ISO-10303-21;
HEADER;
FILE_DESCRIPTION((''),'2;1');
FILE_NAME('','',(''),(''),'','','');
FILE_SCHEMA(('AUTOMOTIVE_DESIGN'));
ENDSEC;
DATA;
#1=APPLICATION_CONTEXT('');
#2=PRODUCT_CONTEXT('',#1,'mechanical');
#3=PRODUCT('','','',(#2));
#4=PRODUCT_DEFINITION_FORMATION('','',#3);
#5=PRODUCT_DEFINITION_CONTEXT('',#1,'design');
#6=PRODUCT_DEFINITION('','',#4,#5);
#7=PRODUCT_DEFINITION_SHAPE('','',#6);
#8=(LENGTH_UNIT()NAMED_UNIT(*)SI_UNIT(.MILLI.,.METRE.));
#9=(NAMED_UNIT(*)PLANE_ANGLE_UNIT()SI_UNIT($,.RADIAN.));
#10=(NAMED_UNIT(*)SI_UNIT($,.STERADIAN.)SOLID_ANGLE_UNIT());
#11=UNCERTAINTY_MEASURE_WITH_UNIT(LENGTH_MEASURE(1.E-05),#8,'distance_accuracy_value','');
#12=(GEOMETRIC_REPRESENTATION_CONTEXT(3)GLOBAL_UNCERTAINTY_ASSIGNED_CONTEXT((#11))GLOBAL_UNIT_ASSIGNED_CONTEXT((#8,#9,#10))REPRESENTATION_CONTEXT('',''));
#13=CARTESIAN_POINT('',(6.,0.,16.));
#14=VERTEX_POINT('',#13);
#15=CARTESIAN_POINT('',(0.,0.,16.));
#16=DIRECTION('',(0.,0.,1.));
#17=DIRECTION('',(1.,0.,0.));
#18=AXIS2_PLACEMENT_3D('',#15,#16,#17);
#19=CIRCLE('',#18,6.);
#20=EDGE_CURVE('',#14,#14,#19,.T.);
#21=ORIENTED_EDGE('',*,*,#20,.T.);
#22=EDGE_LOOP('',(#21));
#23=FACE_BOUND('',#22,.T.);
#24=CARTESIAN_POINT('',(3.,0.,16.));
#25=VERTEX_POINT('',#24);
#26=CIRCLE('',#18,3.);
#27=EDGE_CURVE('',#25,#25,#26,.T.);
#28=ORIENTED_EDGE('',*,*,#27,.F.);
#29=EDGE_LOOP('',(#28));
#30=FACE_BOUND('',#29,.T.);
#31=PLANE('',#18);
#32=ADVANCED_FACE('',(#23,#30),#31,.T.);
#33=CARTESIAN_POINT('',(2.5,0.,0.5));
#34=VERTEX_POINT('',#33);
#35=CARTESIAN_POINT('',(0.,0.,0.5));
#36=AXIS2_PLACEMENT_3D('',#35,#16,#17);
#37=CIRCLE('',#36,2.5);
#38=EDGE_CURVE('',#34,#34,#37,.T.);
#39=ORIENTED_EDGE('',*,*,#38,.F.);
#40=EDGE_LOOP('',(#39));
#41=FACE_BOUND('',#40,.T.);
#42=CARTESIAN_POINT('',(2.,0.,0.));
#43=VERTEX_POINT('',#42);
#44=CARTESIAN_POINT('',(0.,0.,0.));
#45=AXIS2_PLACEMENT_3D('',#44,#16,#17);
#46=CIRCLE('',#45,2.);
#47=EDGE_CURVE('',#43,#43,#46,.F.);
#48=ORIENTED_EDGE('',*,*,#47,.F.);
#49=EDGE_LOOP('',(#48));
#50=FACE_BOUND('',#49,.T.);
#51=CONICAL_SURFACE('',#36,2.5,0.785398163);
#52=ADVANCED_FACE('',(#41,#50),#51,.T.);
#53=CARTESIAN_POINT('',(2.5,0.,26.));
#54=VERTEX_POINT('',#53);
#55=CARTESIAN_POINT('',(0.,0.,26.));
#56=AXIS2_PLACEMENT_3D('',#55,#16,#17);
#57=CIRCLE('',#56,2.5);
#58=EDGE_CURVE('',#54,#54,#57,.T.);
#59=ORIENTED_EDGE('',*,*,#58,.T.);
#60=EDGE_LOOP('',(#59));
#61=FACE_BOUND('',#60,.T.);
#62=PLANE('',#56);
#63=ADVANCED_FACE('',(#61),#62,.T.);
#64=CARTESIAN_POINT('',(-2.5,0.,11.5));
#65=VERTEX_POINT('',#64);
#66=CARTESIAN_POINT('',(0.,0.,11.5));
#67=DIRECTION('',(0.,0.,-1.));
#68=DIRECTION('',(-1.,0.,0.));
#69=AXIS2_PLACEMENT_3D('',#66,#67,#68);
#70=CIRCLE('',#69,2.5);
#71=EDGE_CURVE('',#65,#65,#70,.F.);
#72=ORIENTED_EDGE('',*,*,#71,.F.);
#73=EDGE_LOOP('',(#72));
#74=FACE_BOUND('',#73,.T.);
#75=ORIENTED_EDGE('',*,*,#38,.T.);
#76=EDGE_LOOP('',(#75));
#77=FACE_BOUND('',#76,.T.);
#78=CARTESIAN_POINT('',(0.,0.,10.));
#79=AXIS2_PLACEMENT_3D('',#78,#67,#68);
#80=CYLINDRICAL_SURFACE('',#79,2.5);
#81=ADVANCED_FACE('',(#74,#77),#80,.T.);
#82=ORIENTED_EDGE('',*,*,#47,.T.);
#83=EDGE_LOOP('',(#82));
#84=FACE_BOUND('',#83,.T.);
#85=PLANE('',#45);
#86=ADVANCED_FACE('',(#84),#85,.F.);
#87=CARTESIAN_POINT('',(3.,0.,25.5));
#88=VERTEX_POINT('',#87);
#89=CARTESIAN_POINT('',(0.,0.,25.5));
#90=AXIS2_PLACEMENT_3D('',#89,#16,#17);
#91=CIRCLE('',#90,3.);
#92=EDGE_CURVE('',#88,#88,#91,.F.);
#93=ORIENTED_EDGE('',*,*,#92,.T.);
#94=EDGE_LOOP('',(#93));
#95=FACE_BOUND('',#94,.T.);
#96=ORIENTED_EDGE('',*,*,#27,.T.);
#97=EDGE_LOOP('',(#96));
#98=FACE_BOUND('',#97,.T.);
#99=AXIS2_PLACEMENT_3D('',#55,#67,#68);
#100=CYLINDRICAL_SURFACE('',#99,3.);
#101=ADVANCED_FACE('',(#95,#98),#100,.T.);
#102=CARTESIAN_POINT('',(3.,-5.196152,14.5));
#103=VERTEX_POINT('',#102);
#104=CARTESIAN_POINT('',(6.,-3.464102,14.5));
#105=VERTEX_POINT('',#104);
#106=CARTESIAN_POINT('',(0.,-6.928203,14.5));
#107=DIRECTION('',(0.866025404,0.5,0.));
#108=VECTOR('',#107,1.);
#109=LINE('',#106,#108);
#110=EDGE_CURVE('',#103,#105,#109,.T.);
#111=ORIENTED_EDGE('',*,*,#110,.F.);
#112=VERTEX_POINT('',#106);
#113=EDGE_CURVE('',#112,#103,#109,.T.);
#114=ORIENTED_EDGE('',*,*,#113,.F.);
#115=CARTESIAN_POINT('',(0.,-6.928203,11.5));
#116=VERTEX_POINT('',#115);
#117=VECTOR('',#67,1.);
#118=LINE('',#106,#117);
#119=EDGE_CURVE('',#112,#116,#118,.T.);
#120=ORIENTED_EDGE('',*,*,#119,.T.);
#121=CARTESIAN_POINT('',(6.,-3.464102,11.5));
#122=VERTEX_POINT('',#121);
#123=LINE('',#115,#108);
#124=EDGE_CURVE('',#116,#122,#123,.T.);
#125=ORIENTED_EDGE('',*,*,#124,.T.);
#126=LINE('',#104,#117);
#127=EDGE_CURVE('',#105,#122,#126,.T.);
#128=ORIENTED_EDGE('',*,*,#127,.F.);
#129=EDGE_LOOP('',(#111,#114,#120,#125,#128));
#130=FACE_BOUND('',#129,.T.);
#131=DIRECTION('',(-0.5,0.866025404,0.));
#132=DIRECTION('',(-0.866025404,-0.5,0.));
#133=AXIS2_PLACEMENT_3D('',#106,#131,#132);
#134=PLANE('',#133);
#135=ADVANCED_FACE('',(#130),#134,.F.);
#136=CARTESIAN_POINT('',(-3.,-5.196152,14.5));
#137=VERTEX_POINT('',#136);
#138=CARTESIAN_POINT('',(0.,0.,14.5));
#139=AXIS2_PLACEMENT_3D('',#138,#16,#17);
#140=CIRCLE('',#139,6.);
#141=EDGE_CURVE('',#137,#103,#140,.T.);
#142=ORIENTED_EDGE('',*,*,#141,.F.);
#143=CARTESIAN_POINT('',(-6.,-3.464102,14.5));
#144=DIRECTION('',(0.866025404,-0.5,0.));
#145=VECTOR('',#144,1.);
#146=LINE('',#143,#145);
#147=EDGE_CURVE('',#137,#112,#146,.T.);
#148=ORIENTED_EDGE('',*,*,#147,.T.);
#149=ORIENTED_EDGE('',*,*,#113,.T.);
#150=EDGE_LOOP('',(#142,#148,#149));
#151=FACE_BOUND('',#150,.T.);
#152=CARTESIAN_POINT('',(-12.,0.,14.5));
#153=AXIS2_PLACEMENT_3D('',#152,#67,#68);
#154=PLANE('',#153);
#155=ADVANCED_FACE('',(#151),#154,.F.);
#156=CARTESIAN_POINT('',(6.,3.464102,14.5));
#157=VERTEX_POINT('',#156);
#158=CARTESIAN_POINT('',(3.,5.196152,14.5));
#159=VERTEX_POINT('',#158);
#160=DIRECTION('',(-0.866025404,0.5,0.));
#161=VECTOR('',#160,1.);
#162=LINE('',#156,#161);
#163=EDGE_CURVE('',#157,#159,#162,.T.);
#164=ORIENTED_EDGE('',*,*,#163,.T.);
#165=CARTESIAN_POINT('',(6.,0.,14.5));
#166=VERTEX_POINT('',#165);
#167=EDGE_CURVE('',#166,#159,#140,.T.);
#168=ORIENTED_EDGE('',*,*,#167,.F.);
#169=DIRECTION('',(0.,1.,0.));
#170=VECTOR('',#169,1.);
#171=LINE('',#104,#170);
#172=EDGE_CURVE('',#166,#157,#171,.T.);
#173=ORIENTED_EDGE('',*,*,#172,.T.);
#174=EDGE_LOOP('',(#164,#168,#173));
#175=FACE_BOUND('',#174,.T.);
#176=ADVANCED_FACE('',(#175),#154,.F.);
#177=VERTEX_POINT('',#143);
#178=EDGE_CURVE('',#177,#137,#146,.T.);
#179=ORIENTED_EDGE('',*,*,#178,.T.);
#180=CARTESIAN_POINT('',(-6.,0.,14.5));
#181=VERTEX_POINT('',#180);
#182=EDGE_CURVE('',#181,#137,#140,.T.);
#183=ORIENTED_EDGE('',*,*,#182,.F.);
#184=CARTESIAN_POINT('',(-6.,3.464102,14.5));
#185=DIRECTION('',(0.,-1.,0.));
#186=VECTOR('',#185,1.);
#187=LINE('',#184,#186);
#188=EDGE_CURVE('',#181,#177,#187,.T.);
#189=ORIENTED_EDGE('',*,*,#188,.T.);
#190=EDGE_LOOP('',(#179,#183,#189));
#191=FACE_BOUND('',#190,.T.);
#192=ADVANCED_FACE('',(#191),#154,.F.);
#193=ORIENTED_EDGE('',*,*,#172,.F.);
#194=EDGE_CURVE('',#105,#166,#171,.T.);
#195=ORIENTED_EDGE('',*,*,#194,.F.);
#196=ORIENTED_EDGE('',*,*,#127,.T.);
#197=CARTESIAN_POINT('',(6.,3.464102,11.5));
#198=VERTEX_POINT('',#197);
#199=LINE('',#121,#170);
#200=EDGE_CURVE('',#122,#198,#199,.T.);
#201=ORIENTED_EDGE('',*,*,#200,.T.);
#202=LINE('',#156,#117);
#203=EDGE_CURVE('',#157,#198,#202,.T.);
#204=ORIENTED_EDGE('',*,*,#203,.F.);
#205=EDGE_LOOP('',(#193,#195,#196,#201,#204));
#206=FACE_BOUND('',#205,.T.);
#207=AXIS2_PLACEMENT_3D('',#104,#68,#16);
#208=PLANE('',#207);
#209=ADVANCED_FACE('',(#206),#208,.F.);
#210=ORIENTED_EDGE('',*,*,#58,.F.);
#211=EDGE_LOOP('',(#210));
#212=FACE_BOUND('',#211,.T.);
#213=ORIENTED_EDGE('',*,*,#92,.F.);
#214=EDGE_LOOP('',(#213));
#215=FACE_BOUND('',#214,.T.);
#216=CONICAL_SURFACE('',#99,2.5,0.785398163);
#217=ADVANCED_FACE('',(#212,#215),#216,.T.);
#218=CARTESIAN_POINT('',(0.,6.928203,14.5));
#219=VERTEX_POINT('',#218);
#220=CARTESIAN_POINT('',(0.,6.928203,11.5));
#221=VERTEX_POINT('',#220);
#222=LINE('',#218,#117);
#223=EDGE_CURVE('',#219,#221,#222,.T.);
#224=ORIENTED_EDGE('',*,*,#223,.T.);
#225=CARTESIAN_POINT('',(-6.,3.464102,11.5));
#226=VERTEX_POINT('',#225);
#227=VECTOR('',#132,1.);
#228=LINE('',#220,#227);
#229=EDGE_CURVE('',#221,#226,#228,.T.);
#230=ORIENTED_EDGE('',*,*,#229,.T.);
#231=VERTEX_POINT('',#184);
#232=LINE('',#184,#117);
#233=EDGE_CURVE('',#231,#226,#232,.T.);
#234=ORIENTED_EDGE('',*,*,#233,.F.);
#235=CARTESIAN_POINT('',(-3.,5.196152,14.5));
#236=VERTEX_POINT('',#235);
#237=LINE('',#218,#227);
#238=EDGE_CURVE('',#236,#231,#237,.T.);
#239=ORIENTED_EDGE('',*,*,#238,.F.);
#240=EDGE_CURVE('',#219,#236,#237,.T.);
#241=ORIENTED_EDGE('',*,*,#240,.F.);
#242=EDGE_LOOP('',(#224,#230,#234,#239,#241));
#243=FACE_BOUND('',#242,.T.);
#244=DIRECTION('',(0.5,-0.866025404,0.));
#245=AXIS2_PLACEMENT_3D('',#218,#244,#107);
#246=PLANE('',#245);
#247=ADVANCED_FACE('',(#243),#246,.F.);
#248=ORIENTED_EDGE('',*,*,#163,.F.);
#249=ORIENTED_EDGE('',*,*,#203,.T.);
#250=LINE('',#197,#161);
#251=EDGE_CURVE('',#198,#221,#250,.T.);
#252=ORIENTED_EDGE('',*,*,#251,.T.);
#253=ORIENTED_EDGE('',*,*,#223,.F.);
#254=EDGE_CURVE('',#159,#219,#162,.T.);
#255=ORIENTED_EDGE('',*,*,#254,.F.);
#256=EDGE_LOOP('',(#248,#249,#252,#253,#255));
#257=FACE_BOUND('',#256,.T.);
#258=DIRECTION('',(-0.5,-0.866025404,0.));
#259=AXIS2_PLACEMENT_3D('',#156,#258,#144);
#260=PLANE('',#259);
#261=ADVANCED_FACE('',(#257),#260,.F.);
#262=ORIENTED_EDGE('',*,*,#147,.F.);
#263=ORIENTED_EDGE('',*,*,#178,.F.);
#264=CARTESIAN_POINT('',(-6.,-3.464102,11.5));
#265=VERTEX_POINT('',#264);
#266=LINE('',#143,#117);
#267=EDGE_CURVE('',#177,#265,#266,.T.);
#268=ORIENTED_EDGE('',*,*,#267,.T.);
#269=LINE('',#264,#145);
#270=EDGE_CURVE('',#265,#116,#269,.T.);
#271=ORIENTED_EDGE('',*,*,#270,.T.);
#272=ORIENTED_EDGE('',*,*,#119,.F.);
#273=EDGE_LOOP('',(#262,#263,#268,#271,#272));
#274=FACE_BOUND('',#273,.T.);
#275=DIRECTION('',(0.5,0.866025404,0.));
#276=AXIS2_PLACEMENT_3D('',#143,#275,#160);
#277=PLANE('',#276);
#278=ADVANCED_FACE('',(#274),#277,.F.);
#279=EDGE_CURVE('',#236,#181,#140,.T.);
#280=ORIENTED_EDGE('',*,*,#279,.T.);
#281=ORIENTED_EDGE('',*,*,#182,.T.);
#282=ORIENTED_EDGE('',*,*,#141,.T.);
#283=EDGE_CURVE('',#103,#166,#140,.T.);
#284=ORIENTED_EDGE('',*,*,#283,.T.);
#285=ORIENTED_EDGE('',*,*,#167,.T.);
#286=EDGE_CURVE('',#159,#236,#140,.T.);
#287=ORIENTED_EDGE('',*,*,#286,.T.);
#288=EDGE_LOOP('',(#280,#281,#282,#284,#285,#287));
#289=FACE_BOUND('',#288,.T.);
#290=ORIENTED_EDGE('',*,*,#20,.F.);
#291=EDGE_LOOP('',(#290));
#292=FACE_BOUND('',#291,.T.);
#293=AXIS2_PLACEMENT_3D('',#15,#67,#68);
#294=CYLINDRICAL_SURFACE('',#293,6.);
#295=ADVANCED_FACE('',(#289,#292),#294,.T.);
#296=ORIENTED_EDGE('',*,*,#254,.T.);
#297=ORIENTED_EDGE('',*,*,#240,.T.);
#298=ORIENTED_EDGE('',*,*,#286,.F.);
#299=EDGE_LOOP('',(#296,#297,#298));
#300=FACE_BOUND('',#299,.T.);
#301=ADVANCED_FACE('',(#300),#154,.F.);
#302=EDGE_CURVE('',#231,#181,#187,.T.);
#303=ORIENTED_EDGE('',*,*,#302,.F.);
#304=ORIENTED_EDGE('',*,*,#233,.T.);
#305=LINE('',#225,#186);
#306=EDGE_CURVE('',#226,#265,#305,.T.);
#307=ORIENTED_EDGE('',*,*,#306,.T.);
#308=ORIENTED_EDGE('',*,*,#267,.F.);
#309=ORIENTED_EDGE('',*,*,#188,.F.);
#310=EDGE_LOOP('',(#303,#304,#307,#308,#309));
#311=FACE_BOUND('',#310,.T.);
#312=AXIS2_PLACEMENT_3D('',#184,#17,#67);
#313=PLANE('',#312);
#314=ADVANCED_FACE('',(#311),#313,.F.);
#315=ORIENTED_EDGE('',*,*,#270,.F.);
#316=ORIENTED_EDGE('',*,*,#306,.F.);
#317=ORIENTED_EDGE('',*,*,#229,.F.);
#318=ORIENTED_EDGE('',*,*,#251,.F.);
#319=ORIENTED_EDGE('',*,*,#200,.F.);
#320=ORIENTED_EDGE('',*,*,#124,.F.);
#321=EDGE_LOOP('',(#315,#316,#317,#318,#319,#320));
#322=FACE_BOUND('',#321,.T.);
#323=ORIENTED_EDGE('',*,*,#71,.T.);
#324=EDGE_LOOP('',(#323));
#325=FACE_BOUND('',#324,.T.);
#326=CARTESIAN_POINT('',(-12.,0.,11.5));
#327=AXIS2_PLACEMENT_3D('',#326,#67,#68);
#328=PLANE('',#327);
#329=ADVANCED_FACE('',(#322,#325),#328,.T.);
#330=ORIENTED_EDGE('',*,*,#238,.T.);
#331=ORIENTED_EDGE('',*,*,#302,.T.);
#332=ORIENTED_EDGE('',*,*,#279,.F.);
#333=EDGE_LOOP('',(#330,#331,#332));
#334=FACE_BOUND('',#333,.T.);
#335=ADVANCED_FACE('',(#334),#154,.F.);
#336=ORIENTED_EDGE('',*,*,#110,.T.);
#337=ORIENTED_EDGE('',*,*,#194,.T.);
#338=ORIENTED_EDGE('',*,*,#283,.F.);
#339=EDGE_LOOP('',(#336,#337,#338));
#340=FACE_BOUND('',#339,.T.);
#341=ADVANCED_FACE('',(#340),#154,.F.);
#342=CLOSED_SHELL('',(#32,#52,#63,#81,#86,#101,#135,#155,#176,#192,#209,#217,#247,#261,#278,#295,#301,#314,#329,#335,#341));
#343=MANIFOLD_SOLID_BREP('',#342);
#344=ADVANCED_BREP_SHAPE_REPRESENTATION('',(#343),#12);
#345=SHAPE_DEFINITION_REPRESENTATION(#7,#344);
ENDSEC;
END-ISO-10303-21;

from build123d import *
from build123d.topology import SkipClean

# Parameters (mm, degrees)
SKETCH_1_R          = 2.5
EXTRUDE_228_DEPTH   = 10
EXTRUDE_1_DEPTH     = 1.5
EXTRUDE_2_DEPTH     = 3
SKETCH_4_R          = 6
EXTRUDE_3_DEPTH     = 1.5
SKETCH_5_R          = 3
EXTRUDE_4_DEPTH     = 10
CHAMFER_1_SIZE      = 0.5
SKETCH_6_R          = 2.5
CUT_EXTRUDE_2_DEPTH = 1.5


with BuildPart() as part:
    # Эскиз1 → Extrude 228 (new body)
    with BuildSketch(Plane.XY):
        Circle(SKETCH_1_R)
    extrude(amount=EXTRUDE_228_DEPTH)

    # Эскиз2 → Бобышка-Вытянуть1 (add)
    with BuildSketch(Plane.XY.offset(10)):
        with BuildLine():
            Line((-3, 2.645751311), (-3, -2.645751311))
            ThreePointArc((-3, -2.645751311), (0, -4), (3, -2.645751311))
            Line((3, -2.645751311), (3, 2.645751311))
            ThreePointArc((3, 2.645751311), (0, 4), (-3, 2.645751311))
        make_face()
    extrude(amount=EXTRUDE_1_DEPTH)

    # Эскиз3 → Бобышка-Вытянуть2 (add)
    with BuildSketch(Plane.XY.offset(11.5)):
        Polygon((0, -6.92820323), (6, -3.464101615), (6, 3.464101615), (0, 6.92820323), (-6, 3.464101615), (-6, -3.464101615), align=None)
    extrude(amount=EXTRUDE_2_DEPTH)

    # Эскиз4 → Бобышка-Вытянуть3 (add)
    with BuildSketch(Plane.XY.offset(14.5)):
        Circle(SKETCH_4_R)
    extrude(amount=EXTRUDE_3_DEPTH)

    # Эскиз5 → Бобышка-Вытянуть4 (add)
    with BuildSketch(Plane.XY.offset(16)):
        Circle(SKETCH_5_R)
    extrude(amount=EXTRUDE_4_DEPTH)

    # Фаска1
    chamfer_1_edges = [part.edges().sort_by_distance(p)[0] for p in [
        (-2.5, 0, 0),
        (-3, 0, 26),
    ]]
    chamfer(chamfer_1_edges, length=CHAMFER_1_SIZE)

    # Эскиз6 → Вырез-Вытянуть2 (cut)
    with SkipClean():  # the faces are left unmerged after this step: merging them gives an invalid solid
        with BuildSketch(Plane(origin=(0, 0, 10), x_dir=(-1, 0, 0), z_dir=(0, 0, -1))):
            with BuildLine():
                Line((-3, 2.645751311), (-3, -2.645751311))
                ThreePointArc((-3, -2.645751311), (0, -4), (3, -2.645751311))
                Line((3, -2.645751311), (3, 2.645751311))
                ThreePointArc((3, 2.645751311), (0, 4), (-3, 2.645751311))
            make_face()
            Circle(SKETCH_6_R, mode=Mode.SUBTRACT)
        extrude(amount=-CUT_EXTRUDE_2_DEPTH, mode=Mode.SUBTRACT)


solid = part.part
